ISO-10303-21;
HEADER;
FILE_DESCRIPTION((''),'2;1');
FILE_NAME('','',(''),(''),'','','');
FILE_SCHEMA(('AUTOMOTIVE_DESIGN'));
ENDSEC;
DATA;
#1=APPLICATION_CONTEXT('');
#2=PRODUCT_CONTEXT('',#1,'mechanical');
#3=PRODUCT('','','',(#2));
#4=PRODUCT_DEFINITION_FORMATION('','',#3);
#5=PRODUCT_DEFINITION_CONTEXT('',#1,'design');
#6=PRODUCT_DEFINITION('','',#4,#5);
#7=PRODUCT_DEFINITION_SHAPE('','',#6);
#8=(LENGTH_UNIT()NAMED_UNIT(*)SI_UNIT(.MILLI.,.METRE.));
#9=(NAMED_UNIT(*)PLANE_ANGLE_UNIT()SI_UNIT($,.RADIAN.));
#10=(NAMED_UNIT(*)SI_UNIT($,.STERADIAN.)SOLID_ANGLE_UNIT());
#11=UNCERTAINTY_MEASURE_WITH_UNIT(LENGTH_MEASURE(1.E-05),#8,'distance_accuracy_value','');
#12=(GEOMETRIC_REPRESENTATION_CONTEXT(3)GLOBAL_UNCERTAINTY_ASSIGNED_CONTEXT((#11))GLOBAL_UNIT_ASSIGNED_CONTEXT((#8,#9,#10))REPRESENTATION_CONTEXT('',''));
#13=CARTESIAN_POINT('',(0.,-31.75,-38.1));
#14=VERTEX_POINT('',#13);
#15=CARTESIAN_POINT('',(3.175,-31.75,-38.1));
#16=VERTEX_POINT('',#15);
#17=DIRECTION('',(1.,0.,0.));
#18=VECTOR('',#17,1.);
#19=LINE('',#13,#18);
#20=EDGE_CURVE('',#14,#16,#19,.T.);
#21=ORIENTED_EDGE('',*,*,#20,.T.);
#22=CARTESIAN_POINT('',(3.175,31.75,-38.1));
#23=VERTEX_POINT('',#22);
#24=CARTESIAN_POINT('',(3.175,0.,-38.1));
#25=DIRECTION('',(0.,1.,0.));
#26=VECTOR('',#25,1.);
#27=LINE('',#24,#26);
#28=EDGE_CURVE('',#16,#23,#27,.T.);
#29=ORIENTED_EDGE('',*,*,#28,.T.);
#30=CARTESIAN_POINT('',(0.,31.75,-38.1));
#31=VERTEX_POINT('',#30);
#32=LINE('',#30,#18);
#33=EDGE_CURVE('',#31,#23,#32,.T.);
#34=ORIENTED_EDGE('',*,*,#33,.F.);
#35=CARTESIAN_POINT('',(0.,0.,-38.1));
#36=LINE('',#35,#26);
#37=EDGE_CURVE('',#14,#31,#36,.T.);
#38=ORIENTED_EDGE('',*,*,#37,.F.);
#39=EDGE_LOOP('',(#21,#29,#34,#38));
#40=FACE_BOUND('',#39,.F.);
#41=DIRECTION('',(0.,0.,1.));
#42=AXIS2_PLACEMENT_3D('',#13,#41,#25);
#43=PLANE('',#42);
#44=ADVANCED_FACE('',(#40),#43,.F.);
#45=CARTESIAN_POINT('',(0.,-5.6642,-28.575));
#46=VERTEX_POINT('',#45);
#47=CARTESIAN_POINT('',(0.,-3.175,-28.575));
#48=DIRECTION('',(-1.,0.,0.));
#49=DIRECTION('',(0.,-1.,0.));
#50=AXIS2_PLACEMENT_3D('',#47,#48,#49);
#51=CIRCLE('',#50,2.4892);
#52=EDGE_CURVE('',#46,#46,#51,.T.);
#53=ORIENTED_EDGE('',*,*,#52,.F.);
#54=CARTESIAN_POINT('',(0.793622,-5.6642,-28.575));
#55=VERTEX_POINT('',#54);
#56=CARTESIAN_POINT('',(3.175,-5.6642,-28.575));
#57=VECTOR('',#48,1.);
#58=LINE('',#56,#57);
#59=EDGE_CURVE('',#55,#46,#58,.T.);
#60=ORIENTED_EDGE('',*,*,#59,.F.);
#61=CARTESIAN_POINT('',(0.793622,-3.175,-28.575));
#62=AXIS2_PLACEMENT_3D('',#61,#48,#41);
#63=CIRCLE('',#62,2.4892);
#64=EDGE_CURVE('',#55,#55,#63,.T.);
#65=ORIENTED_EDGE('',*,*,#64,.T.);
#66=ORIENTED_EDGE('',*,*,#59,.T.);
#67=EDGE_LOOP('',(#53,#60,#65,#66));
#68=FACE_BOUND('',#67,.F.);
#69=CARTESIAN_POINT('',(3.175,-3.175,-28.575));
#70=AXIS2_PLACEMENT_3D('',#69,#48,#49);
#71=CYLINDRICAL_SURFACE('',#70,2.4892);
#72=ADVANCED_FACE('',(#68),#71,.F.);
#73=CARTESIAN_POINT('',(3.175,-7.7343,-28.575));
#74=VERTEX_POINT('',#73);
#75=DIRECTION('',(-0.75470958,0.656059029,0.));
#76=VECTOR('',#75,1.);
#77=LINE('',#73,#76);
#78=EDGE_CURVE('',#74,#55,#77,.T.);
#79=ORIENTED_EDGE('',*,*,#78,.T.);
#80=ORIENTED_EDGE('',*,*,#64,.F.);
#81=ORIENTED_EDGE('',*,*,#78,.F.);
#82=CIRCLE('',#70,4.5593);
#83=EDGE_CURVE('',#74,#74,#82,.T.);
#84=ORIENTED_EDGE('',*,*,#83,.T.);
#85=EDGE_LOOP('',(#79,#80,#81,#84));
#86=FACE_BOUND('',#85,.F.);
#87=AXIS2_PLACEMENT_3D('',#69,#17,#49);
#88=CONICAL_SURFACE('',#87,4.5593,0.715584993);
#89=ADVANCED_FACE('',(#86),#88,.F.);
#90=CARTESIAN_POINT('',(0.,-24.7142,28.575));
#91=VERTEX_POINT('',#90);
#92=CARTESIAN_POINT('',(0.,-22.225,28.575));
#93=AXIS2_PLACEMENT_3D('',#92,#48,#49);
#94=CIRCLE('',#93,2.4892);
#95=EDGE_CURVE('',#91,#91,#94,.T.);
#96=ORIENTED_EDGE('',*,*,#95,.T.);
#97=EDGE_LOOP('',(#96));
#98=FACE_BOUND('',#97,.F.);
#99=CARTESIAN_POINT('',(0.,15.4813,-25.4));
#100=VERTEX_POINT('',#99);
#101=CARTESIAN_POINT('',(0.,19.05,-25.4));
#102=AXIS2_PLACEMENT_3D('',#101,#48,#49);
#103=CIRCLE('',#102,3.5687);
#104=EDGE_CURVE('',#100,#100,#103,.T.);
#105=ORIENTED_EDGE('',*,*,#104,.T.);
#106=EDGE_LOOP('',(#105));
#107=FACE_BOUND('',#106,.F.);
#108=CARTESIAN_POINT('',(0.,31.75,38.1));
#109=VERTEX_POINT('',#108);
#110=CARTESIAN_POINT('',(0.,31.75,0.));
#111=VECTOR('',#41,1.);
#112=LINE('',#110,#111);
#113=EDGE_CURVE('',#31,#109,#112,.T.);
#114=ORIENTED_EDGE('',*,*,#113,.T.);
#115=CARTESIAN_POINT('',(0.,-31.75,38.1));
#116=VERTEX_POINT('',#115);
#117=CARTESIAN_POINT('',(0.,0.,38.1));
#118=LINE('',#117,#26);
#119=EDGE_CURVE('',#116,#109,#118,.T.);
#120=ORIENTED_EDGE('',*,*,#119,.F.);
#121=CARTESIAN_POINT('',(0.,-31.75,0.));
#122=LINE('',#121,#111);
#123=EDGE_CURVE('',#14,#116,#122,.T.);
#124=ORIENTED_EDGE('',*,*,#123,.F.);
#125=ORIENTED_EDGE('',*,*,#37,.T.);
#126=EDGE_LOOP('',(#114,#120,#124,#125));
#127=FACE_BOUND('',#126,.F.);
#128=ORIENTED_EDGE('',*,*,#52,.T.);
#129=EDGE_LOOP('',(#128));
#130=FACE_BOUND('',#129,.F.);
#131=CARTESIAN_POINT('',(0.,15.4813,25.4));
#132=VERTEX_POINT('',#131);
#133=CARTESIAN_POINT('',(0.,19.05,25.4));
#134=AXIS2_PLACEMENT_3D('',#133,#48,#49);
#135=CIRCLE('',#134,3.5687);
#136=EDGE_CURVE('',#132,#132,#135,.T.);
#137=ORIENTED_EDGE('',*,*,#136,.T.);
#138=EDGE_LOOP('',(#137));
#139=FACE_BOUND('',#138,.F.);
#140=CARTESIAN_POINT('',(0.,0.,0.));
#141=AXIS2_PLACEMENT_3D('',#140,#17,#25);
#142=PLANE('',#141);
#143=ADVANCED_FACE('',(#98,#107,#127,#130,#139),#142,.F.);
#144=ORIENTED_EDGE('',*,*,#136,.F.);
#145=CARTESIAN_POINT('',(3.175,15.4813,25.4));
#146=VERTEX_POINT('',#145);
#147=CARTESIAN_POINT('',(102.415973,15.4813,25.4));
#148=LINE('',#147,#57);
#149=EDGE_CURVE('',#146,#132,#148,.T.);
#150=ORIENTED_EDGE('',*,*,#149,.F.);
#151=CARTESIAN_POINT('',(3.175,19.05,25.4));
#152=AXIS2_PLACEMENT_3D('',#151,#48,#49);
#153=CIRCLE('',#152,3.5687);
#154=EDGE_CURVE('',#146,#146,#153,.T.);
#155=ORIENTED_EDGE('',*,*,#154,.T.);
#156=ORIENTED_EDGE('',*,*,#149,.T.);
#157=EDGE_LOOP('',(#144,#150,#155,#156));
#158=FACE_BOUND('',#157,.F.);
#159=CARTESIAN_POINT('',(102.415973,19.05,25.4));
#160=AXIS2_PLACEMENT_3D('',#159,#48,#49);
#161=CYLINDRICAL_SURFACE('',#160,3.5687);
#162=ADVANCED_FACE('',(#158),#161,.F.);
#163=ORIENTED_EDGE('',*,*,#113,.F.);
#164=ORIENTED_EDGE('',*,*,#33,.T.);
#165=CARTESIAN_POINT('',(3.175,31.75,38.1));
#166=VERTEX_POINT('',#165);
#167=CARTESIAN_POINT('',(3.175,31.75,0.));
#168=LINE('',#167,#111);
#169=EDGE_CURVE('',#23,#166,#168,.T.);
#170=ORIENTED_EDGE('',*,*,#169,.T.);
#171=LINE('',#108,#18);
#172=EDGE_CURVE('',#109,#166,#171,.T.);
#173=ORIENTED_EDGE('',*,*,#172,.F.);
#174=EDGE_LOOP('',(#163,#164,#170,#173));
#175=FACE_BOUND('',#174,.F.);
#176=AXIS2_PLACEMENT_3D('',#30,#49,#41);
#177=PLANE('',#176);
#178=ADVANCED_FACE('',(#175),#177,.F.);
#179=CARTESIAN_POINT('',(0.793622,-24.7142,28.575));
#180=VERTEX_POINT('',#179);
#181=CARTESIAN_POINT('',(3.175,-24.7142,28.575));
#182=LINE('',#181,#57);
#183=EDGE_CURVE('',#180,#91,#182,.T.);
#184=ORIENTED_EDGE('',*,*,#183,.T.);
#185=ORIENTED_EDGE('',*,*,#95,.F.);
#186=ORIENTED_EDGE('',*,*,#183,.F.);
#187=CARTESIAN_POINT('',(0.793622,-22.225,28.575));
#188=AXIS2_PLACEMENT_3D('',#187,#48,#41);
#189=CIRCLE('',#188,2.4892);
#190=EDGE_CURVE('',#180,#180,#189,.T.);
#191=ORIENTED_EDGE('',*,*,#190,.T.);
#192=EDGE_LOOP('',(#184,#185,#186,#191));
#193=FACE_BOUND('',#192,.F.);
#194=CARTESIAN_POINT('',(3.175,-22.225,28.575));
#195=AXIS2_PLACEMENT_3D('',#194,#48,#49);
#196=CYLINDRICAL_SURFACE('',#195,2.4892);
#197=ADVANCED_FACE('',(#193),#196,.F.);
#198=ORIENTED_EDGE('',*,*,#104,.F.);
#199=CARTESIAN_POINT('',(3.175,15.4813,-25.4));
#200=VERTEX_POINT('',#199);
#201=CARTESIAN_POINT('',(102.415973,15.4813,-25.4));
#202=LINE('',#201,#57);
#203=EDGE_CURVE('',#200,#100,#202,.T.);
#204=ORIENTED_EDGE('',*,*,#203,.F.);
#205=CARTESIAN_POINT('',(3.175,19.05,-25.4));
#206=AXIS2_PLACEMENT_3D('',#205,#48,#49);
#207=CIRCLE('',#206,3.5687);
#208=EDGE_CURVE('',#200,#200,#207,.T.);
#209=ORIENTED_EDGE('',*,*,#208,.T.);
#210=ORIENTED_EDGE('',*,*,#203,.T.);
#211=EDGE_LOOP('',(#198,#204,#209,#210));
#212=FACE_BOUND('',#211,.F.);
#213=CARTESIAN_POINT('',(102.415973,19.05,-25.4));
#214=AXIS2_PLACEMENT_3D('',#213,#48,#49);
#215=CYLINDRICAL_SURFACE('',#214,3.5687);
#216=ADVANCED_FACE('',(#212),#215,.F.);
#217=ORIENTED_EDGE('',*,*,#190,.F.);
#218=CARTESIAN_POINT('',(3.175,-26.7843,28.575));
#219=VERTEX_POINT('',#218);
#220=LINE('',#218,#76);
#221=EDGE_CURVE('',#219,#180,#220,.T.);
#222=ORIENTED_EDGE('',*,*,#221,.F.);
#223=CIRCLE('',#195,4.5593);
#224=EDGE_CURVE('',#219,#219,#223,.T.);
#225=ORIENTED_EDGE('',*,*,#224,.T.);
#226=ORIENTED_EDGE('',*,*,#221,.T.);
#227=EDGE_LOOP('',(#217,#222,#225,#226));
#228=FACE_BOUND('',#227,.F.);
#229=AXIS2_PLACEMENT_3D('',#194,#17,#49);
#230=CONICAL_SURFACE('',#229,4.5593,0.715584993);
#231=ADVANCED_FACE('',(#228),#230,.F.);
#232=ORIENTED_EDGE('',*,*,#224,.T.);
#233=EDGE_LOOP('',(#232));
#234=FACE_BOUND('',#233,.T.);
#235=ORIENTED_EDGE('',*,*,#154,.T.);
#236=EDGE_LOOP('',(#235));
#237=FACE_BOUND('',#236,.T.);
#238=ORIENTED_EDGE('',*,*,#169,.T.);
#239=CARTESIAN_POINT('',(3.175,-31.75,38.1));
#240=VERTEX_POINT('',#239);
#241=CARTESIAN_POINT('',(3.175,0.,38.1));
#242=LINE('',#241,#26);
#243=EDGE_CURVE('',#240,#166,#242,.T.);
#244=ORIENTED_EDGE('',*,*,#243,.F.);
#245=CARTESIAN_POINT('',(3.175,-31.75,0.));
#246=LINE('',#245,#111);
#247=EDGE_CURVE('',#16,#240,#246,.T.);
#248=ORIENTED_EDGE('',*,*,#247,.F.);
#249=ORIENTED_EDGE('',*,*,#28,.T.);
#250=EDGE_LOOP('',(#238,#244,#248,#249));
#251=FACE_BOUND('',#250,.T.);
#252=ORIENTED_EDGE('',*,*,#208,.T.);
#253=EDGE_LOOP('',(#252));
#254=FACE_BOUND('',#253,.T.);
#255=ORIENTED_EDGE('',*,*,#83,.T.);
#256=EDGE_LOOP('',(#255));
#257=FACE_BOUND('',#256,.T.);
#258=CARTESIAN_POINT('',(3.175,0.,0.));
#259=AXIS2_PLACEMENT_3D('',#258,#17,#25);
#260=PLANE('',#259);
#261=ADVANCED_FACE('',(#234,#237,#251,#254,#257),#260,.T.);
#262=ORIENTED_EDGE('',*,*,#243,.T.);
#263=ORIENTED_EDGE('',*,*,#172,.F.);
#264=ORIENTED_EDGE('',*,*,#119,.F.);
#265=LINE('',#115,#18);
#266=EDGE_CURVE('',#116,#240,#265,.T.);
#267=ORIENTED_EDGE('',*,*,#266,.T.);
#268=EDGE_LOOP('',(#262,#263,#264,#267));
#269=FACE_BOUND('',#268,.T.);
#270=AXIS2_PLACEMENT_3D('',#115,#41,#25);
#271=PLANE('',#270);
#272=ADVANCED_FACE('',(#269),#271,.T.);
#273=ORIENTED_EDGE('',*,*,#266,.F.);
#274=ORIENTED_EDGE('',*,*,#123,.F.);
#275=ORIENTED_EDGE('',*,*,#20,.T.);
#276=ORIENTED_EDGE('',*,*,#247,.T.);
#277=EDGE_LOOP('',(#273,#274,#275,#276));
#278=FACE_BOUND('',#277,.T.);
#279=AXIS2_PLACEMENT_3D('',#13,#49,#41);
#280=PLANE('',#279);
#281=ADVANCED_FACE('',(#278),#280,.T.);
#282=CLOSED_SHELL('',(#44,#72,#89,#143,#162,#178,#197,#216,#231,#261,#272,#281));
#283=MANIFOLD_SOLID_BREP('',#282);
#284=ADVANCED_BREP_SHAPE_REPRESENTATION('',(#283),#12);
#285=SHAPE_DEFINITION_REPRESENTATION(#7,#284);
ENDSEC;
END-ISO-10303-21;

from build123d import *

# Parameters (mm, degrees)
F0_W           = 63.5
F0_H           = 76.2
F1_DEPTH       = 3.175
F3_D           = 4.9784
F3_CSINK_D     = 9.1186
F3_CSINK_ANGLE = 82
F5_D           = 7.1374


# Not quite as in the source:
# - a feature names something its author has since deleted; it is built from what else it names


with BuildPart() as f1:
    # F0 (on Right) → F1 (new body)
    with BuildSketch(Plane.YZ):
        Rectangle(F0_W, F0_H)
    extrude(amount=F1_DEPTH)

    # F3 (through all)
    with Locations(Plane.YZ.offset(3.175)):
        with Locations((-22.225, 28.575), (-3.175, -28.575)):
            CounterSinkHole(F3_D / 2, F3_CSINK_D / 2, counter_sink_angle=F3_CSINK_ANGLE)

    # F5 (through all)
    with Locations(Plane.YZ.offset(3.175)):
        with Locations((19.05, 25.4), (19.05, -25.4)):
            Hole(F5_D / 2)


solid = f1.part
